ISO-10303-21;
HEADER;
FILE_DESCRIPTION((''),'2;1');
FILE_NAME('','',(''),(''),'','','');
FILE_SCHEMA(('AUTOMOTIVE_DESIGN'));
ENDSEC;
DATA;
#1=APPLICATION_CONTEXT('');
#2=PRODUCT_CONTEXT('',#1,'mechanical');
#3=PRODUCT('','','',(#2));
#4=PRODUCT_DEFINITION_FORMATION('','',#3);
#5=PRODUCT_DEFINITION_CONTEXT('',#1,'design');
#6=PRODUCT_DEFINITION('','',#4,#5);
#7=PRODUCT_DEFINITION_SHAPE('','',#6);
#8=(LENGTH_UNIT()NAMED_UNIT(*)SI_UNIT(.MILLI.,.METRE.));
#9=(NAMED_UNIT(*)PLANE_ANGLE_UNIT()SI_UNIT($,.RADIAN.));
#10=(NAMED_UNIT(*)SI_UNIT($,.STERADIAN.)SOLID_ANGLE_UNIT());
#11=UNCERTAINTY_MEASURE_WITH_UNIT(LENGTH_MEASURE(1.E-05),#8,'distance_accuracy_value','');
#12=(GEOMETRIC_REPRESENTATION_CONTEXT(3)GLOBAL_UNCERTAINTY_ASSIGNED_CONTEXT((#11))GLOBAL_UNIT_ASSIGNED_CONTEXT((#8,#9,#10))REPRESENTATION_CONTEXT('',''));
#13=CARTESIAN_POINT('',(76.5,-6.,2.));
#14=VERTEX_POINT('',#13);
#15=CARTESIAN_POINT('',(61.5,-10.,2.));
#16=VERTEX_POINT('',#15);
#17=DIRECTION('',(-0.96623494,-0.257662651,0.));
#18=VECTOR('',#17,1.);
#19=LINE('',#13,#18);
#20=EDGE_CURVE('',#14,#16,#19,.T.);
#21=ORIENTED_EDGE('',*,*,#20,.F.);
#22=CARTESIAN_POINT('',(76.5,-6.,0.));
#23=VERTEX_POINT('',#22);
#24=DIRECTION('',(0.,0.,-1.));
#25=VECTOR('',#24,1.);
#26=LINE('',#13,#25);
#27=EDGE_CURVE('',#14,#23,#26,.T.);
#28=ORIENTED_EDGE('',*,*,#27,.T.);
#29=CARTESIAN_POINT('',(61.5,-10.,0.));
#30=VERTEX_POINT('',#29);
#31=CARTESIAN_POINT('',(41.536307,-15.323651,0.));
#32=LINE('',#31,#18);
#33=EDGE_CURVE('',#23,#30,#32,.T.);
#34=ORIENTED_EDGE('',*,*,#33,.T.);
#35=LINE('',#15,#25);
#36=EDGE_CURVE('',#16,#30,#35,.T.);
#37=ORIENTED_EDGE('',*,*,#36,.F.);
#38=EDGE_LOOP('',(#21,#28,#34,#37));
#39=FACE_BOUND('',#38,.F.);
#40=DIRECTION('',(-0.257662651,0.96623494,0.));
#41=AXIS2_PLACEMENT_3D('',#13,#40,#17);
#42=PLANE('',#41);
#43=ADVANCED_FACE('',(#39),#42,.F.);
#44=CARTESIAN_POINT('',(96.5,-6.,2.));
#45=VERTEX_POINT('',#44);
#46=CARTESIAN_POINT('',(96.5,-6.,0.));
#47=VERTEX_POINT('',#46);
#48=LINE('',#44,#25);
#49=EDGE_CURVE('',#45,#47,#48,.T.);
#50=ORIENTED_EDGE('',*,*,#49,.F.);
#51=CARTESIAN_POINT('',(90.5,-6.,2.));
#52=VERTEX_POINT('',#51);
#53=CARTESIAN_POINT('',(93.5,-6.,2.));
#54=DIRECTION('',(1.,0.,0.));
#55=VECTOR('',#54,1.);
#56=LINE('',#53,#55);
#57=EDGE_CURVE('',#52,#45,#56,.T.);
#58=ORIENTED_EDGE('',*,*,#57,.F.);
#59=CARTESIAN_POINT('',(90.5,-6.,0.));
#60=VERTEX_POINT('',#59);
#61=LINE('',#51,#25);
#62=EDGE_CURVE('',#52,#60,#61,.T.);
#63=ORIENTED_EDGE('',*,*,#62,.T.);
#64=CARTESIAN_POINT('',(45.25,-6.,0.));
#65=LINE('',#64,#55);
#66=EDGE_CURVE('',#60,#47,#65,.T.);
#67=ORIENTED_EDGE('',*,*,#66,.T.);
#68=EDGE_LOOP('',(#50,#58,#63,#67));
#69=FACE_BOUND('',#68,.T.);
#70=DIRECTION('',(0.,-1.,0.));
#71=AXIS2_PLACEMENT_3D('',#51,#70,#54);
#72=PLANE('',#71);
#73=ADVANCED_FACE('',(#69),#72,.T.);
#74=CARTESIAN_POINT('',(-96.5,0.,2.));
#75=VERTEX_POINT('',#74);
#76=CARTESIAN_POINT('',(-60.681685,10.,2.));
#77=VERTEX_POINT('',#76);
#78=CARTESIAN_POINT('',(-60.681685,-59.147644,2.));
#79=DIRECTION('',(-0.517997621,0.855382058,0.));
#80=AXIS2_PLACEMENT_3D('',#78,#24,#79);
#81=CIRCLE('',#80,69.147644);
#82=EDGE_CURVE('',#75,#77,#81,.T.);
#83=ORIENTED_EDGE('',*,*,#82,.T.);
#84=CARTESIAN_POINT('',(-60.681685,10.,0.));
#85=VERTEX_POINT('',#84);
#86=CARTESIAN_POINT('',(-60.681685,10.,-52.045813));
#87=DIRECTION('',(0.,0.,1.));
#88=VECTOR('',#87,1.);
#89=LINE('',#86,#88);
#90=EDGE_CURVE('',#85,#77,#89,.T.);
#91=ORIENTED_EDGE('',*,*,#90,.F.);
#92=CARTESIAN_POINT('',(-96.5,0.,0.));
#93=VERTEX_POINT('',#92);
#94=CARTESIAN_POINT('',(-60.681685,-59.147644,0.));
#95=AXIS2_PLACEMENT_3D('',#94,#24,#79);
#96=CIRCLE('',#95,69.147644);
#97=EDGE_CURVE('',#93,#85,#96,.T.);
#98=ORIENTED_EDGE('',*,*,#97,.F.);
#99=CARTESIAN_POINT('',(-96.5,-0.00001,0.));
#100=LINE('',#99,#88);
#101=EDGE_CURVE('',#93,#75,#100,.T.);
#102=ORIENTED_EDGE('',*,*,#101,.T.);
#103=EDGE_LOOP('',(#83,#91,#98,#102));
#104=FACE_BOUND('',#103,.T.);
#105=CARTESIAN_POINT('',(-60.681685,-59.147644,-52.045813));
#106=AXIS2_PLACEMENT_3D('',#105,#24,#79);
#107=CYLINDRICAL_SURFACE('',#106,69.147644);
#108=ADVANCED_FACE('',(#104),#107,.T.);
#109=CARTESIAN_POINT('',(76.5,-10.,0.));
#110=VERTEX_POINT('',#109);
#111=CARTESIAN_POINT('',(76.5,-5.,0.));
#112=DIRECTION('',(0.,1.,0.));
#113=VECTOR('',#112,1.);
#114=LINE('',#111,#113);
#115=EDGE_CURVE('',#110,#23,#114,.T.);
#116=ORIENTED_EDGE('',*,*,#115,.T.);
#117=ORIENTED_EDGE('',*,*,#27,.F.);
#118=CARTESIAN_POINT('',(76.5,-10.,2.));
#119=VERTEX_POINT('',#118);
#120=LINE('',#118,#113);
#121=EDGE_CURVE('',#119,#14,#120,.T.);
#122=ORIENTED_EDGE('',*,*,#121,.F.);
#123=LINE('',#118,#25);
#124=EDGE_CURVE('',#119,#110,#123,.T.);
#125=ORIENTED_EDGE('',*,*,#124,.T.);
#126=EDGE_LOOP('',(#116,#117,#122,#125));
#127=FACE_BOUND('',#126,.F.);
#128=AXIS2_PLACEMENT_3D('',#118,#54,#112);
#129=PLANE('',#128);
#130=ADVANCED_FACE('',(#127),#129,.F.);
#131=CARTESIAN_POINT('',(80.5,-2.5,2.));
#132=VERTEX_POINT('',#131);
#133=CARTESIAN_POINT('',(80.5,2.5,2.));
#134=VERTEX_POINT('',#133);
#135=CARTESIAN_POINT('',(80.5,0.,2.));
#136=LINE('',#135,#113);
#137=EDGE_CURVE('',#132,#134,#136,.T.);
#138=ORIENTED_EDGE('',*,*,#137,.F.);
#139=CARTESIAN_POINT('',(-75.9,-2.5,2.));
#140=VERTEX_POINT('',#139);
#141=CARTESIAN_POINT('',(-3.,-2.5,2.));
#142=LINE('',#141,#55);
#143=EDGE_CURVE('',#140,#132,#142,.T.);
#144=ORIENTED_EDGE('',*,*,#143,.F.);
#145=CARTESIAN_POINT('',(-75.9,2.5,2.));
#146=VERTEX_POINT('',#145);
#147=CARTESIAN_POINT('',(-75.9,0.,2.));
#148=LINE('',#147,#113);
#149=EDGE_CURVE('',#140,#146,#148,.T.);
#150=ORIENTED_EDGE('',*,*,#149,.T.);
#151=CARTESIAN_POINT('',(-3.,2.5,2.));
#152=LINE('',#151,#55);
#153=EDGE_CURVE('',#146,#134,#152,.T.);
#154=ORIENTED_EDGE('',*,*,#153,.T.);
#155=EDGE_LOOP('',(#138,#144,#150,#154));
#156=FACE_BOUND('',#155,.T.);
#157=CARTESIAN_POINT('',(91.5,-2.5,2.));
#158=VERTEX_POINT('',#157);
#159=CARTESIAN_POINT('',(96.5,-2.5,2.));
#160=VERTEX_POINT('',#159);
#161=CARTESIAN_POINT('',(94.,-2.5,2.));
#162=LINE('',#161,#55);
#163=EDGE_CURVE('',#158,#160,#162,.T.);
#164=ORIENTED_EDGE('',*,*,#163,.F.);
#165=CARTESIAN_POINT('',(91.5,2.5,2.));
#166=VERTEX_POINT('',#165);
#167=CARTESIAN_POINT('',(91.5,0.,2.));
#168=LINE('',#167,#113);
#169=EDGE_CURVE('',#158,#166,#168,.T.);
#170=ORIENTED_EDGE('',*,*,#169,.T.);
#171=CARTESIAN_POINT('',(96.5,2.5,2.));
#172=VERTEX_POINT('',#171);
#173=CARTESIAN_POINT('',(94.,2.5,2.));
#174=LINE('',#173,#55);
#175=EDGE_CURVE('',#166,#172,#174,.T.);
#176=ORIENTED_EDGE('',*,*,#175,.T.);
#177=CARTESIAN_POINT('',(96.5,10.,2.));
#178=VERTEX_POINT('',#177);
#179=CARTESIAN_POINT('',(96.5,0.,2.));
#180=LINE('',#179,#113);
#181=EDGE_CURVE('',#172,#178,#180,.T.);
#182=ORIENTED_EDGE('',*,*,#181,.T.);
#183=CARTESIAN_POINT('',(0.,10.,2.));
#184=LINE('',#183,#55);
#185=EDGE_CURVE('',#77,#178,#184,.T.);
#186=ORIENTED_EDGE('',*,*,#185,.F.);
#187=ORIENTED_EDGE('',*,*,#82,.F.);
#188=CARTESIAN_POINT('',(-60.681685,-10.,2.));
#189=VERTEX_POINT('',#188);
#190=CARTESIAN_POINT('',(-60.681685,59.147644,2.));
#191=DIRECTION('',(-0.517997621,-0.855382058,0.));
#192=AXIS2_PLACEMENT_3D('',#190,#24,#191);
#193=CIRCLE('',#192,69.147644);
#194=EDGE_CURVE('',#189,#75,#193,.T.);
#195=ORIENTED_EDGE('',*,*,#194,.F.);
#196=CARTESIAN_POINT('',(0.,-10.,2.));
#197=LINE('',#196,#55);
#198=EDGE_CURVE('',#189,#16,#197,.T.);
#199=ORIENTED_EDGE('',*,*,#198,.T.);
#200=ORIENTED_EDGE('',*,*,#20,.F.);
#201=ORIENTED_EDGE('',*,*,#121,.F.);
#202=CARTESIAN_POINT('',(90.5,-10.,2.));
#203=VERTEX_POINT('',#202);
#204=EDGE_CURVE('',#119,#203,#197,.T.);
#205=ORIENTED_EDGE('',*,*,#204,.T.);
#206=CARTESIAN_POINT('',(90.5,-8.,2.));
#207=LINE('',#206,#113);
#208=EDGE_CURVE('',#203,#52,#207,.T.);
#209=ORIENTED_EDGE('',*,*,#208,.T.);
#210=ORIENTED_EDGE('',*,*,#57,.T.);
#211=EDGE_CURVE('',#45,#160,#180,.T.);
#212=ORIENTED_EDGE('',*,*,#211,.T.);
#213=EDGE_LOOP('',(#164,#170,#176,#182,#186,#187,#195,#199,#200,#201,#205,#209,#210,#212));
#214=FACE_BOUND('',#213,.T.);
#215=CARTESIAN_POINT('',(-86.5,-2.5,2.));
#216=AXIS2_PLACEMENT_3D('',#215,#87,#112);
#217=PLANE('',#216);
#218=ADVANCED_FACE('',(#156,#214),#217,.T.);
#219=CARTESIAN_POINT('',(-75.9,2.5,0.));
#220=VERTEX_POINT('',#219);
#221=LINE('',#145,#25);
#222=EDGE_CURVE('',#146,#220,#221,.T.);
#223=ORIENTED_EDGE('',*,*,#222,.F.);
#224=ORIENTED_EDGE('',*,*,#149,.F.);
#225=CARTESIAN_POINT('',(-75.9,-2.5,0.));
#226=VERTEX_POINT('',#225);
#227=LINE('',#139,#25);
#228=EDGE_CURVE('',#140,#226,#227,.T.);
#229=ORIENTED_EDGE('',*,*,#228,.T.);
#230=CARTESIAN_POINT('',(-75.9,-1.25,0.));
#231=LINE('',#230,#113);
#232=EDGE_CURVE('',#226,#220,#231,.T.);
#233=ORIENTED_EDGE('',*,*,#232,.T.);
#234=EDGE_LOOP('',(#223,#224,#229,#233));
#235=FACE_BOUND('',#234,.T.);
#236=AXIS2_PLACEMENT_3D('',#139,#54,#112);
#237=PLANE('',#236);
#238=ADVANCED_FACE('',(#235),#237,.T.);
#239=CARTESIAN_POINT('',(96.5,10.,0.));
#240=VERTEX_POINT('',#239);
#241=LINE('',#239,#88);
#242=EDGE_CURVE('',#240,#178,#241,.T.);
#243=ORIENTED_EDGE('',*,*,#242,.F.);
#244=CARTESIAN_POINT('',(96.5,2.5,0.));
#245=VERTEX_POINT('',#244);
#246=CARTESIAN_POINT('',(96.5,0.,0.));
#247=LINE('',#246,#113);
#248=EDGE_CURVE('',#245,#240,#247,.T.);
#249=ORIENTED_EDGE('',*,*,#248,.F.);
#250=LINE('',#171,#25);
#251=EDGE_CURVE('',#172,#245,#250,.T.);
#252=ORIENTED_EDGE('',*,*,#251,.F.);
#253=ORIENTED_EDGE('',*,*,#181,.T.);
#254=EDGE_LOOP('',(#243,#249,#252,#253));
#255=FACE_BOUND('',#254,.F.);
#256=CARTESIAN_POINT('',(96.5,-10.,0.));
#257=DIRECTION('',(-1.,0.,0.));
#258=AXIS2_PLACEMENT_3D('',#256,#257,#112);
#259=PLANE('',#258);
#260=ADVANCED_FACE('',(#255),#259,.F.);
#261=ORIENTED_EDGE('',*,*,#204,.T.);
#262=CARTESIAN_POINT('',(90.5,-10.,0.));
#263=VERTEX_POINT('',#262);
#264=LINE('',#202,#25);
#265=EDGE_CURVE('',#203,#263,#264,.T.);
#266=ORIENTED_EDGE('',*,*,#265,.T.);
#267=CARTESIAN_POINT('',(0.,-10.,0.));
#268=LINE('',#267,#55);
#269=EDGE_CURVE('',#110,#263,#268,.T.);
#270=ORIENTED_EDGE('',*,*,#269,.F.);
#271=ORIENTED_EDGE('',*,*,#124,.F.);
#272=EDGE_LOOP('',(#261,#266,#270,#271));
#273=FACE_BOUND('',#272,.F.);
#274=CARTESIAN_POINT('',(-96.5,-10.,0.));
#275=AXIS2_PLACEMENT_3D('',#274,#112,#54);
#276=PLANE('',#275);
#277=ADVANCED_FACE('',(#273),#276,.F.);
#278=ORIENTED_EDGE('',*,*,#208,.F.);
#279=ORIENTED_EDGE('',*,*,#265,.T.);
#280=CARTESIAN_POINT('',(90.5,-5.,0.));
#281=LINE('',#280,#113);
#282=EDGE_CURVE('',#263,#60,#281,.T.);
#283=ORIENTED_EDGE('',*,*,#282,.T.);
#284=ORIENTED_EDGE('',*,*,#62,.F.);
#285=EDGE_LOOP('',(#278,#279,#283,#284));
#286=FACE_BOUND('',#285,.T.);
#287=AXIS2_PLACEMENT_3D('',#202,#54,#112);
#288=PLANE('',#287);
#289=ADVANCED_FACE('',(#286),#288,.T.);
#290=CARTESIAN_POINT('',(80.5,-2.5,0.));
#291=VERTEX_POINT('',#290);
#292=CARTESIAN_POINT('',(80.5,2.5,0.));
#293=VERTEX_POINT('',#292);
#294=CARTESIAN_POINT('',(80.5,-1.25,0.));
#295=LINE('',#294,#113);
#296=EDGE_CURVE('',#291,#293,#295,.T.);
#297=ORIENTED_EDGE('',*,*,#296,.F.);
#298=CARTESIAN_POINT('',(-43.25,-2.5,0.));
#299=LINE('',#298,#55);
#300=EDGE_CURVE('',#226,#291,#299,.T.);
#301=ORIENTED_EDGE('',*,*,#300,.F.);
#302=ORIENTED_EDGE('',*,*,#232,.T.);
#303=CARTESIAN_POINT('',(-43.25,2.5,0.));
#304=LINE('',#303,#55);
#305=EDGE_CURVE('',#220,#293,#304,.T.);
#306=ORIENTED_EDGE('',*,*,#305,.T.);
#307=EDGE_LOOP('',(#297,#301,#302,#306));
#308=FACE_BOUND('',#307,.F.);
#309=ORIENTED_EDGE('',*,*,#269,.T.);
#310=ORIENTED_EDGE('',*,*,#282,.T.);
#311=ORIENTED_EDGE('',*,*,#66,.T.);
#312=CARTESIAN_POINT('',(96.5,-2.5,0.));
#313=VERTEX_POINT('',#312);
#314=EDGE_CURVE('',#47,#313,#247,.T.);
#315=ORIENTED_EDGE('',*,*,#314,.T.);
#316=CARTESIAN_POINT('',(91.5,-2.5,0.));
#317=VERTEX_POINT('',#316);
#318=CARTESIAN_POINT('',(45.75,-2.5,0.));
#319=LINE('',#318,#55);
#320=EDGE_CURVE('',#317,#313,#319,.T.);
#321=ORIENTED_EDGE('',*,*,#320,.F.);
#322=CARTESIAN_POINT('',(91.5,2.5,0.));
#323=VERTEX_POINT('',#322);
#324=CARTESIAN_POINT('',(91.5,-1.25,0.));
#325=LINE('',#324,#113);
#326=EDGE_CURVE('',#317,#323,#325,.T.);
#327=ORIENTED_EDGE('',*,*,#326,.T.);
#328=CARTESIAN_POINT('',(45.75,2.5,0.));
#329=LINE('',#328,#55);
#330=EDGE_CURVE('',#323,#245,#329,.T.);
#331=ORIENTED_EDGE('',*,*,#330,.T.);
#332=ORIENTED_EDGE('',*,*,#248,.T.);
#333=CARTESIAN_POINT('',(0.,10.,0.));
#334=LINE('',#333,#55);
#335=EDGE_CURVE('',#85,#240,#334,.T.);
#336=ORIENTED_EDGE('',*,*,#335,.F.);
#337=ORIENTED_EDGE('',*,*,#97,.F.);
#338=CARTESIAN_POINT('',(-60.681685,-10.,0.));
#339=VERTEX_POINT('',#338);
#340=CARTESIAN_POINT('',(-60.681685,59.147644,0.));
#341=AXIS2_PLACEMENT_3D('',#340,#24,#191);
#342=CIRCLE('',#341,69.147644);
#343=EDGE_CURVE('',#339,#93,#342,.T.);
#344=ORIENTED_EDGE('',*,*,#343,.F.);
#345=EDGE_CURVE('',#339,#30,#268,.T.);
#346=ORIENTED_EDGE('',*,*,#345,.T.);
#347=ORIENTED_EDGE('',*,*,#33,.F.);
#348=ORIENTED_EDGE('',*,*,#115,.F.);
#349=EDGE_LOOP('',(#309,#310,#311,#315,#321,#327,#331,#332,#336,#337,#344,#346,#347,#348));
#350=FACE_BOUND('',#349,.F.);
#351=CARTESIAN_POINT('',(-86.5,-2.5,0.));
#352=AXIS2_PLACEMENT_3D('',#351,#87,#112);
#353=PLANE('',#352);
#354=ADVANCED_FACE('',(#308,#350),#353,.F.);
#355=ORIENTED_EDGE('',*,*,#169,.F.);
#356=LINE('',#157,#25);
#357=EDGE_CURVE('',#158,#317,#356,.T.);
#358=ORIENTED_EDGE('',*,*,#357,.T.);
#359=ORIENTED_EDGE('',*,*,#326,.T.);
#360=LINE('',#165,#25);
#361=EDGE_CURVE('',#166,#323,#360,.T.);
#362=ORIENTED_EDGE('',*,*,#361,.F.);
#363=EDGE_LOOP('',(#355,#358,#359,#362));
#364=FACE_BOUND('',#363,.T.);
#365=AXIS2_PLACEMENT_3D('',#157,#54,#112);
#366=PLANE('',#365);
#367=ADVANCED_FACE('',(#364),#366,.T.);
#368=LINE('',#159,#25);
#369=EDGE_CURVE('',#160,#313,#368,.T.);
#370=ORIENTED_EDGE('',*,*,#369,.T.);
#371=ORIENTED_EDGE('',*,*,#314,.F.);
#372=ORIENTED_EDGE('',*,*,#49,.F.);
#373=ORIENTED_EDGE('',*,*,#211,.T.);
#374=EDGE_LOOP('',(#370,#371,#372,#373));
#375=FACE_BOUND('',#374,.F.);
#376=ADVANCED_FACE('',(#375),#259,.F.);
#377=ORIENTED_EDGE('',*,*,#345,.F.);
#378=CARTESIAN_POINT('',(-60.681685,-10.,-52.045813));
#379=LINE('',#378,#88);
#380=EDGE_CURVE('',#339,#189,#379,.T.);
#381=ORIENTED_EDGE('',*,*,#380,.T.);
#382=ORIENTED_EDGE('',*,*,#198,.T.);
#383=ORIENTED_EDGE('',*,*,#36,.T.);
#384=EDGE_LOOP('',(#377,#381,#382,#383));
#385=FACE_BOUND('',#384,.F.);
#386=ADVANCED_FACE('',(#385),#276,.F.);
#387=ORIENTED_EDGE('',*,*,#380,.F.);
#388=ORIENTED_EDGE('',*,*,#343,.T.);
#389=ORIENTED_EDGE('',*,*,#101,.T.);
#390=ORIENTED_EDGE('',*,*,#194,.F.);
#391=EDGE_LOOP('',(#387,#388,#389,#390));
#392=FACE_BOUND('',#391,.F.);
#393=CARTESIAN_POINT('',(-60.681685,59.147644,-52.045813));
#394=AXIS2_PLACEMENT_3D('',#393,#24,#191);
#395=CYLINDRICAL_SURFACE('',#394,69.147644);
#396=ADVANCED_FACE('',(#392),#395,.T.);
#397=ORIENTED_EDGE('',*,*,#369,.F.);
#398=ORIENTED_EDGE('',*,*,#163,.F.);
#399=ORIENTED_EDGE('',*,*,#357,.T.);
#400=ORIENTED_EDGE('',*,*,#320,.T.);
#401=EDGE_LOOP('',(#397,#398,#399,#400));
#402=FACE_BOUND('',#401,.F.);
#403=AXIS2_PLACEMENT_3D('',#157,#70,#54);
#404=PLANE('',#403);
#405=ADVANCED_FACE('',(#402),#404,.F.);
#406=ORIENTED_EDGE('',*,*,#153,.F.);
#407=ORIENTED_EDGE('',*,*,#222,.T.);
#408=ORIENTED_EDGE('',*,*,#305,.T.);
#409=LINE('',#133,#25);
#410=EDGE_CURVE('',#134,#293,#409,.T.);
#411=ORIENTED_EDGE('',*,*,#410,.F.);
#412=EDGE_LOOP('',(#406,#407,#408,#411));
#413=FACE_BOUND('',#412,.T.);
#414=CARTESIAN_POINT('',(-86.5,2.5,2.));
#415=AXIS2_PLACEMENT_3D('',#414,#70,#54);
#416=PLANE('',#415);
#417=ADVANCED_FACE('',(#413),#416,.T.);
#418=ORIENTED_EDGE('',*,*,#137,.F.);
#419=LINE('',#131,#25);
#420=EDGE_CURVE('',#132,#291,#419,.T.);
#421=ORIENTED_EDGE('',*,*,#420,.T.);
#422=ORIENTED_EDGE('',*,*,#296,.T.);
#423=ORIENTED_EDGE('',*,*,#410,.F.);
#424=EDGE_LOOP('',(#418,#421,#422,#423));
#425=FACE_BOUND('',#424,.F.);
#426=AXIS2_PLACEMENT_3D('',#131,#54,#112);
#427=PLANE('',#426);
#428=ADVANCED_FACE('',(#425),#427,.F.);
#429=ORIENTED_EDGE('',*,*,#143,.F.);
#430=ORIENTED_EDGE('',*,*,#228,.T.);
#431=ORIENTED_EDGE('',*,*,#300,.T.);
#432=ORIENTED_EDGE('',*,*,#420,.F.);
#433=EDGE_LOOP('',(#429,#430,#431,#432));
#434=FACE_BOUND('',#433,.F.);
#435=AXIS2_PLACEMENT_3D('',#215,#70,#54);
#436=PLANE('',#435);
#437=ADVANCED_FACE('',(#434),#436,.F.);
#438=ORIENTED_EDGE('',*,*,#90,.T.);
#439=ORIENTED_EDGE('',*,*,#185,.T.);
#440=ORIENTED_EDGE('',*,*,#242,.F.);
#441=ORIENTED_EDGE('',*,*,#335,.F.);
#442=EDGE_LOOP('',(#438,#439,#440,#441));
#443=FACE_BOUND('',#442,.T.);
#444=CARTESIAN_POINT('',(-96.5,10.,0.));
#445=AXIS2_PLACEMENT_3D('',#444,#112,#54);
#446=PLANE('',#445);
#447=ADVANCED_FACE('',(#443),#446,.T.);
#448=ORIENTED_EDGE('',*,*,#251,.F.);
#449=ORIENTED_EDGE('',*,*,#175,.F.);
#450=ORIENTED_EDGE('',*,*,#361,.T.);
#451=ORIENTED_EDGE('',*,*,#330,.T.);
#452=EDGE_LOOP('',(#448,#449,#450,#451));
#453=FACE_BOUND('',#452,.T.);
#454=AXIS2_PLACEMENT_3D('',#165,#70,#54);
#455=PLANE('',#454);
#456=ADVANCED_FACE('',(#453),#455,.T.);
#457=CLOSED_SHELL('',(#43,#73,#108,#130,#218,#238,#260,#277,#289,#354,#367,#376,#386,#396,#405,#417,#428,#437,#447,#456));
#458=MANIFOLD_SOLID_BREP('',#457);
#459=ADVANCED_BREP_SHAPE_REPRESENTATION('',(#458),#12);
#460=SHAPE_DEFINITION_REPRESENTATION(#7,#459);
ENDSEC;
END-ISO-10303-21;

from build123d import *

# Parameters (mm, degrees)
F0_W        = 193
F0_H        = 20
F1_DEPTH    = 2
F2_W        = 5
F2_H        = 5
F2_W_2      = 167
F3_DEPTH    = 25
F4_SIZE2    = 14.99999
F4_SIZE     = 9.99999
F5_W        = 6
F5_H        = 4
F6_DEPTH    = 25
F7_T1_DEPTH = 106.0916256943
F8_DEPTH    = 10.6


# Not quite as in the source:
# - a fillet or chamfer that OpenCascade refuses, or shapes differently, is made with other operations: its cross-section is extruded or revolved along the edge and cut away or added
# - a fillet or chamfer is up to 0.001 mm smaller than in the source, because OpenCascade refuses the exact size


with BuildPart() as f1:
    # F0 (on Top) → F1 (new body)
    with BuildSketch(Plane.XY):
        Rectangle(F0_W, F0_H)
    extrude(amount=F1_DEPTH)

    # F2 (on face) → F3 (cut)
    with BuildSketch(Plane.XY.offset(2)):
        with Locations((94, 0)):
            Rectangle(F2_W, F2_H)
        with Locations((-3, 0)):
            Rectangle(F2_W_2, F2_H)
    extrude(amount=-F3_DEPTH, mode=Mode.SUBTRACT)

    # F4 (size 10 and 15 in the source; OpenCascade refuses exactly that, so slightly less here)
    f4_edges = [f1.edges().sort_by_distance(p)[0] for p in [
        (-96.5, 10, 1),
        (-96.5, -10, 1),
    ]]
    f4_side = f1.faces().sort_by_distance((-96.5, 0, 1))[0]
    chamfer(f4_edges, length=F4_SIZE, length2=F4_SIZE2, reference=f4_side)

    # F5 (on face) → F6 (cut)
    with BuildSketch(Plane.XY.offset(2)):
        with Locations((93.5, -8)):
            Rectangle(F5_W, F5_H)
        Polygon((61.5, -10), (76.5, -10), (76.5, -6), align=None)
    extrude(amount=-F6_DEPTH, mode=Mode.SUBTRACT)

    # F7: fillet of radius 69.147644117 on 2 edges, made by hand

    # F7_s2 → F7_t1 (cut)
    with BuildSketch(Plane.XY.offset(-52.0458128472)):
        with BuildLine():
            ThreePointArc((-96.5, -1e-05), (-79.2757127961, -7.4530977113), (-60.6816848611, -10))
            Line((-60.6816848611, -10), (-81.50001, -10))
            Line((-81.50001, -10), (-96.5, -1e-05))
        make_face()
        with BuildLine():
            ThreePointArc((-96.5, 1e-05), (-79.2757127961, 7.4530977113), (-60.6816848611, 10))
            Line((-60.6816848611, 10), (-81.50001, 10))
            Line((-81.50001, 10), (-96.5, 1e-05))
        make_face()
    extrude(amount=F7_T1_DEPTH, mode=Mode.SUBTRACT)

    # F8 (add): a face of the model
    f8_faces = [f1.faces().sort_by_distance(p)[0] for p in [
        (-86.5, 0, 1),
    ]]
    extrude(f8_faces, amount=F8_DEPTH)


solid = f1.part
